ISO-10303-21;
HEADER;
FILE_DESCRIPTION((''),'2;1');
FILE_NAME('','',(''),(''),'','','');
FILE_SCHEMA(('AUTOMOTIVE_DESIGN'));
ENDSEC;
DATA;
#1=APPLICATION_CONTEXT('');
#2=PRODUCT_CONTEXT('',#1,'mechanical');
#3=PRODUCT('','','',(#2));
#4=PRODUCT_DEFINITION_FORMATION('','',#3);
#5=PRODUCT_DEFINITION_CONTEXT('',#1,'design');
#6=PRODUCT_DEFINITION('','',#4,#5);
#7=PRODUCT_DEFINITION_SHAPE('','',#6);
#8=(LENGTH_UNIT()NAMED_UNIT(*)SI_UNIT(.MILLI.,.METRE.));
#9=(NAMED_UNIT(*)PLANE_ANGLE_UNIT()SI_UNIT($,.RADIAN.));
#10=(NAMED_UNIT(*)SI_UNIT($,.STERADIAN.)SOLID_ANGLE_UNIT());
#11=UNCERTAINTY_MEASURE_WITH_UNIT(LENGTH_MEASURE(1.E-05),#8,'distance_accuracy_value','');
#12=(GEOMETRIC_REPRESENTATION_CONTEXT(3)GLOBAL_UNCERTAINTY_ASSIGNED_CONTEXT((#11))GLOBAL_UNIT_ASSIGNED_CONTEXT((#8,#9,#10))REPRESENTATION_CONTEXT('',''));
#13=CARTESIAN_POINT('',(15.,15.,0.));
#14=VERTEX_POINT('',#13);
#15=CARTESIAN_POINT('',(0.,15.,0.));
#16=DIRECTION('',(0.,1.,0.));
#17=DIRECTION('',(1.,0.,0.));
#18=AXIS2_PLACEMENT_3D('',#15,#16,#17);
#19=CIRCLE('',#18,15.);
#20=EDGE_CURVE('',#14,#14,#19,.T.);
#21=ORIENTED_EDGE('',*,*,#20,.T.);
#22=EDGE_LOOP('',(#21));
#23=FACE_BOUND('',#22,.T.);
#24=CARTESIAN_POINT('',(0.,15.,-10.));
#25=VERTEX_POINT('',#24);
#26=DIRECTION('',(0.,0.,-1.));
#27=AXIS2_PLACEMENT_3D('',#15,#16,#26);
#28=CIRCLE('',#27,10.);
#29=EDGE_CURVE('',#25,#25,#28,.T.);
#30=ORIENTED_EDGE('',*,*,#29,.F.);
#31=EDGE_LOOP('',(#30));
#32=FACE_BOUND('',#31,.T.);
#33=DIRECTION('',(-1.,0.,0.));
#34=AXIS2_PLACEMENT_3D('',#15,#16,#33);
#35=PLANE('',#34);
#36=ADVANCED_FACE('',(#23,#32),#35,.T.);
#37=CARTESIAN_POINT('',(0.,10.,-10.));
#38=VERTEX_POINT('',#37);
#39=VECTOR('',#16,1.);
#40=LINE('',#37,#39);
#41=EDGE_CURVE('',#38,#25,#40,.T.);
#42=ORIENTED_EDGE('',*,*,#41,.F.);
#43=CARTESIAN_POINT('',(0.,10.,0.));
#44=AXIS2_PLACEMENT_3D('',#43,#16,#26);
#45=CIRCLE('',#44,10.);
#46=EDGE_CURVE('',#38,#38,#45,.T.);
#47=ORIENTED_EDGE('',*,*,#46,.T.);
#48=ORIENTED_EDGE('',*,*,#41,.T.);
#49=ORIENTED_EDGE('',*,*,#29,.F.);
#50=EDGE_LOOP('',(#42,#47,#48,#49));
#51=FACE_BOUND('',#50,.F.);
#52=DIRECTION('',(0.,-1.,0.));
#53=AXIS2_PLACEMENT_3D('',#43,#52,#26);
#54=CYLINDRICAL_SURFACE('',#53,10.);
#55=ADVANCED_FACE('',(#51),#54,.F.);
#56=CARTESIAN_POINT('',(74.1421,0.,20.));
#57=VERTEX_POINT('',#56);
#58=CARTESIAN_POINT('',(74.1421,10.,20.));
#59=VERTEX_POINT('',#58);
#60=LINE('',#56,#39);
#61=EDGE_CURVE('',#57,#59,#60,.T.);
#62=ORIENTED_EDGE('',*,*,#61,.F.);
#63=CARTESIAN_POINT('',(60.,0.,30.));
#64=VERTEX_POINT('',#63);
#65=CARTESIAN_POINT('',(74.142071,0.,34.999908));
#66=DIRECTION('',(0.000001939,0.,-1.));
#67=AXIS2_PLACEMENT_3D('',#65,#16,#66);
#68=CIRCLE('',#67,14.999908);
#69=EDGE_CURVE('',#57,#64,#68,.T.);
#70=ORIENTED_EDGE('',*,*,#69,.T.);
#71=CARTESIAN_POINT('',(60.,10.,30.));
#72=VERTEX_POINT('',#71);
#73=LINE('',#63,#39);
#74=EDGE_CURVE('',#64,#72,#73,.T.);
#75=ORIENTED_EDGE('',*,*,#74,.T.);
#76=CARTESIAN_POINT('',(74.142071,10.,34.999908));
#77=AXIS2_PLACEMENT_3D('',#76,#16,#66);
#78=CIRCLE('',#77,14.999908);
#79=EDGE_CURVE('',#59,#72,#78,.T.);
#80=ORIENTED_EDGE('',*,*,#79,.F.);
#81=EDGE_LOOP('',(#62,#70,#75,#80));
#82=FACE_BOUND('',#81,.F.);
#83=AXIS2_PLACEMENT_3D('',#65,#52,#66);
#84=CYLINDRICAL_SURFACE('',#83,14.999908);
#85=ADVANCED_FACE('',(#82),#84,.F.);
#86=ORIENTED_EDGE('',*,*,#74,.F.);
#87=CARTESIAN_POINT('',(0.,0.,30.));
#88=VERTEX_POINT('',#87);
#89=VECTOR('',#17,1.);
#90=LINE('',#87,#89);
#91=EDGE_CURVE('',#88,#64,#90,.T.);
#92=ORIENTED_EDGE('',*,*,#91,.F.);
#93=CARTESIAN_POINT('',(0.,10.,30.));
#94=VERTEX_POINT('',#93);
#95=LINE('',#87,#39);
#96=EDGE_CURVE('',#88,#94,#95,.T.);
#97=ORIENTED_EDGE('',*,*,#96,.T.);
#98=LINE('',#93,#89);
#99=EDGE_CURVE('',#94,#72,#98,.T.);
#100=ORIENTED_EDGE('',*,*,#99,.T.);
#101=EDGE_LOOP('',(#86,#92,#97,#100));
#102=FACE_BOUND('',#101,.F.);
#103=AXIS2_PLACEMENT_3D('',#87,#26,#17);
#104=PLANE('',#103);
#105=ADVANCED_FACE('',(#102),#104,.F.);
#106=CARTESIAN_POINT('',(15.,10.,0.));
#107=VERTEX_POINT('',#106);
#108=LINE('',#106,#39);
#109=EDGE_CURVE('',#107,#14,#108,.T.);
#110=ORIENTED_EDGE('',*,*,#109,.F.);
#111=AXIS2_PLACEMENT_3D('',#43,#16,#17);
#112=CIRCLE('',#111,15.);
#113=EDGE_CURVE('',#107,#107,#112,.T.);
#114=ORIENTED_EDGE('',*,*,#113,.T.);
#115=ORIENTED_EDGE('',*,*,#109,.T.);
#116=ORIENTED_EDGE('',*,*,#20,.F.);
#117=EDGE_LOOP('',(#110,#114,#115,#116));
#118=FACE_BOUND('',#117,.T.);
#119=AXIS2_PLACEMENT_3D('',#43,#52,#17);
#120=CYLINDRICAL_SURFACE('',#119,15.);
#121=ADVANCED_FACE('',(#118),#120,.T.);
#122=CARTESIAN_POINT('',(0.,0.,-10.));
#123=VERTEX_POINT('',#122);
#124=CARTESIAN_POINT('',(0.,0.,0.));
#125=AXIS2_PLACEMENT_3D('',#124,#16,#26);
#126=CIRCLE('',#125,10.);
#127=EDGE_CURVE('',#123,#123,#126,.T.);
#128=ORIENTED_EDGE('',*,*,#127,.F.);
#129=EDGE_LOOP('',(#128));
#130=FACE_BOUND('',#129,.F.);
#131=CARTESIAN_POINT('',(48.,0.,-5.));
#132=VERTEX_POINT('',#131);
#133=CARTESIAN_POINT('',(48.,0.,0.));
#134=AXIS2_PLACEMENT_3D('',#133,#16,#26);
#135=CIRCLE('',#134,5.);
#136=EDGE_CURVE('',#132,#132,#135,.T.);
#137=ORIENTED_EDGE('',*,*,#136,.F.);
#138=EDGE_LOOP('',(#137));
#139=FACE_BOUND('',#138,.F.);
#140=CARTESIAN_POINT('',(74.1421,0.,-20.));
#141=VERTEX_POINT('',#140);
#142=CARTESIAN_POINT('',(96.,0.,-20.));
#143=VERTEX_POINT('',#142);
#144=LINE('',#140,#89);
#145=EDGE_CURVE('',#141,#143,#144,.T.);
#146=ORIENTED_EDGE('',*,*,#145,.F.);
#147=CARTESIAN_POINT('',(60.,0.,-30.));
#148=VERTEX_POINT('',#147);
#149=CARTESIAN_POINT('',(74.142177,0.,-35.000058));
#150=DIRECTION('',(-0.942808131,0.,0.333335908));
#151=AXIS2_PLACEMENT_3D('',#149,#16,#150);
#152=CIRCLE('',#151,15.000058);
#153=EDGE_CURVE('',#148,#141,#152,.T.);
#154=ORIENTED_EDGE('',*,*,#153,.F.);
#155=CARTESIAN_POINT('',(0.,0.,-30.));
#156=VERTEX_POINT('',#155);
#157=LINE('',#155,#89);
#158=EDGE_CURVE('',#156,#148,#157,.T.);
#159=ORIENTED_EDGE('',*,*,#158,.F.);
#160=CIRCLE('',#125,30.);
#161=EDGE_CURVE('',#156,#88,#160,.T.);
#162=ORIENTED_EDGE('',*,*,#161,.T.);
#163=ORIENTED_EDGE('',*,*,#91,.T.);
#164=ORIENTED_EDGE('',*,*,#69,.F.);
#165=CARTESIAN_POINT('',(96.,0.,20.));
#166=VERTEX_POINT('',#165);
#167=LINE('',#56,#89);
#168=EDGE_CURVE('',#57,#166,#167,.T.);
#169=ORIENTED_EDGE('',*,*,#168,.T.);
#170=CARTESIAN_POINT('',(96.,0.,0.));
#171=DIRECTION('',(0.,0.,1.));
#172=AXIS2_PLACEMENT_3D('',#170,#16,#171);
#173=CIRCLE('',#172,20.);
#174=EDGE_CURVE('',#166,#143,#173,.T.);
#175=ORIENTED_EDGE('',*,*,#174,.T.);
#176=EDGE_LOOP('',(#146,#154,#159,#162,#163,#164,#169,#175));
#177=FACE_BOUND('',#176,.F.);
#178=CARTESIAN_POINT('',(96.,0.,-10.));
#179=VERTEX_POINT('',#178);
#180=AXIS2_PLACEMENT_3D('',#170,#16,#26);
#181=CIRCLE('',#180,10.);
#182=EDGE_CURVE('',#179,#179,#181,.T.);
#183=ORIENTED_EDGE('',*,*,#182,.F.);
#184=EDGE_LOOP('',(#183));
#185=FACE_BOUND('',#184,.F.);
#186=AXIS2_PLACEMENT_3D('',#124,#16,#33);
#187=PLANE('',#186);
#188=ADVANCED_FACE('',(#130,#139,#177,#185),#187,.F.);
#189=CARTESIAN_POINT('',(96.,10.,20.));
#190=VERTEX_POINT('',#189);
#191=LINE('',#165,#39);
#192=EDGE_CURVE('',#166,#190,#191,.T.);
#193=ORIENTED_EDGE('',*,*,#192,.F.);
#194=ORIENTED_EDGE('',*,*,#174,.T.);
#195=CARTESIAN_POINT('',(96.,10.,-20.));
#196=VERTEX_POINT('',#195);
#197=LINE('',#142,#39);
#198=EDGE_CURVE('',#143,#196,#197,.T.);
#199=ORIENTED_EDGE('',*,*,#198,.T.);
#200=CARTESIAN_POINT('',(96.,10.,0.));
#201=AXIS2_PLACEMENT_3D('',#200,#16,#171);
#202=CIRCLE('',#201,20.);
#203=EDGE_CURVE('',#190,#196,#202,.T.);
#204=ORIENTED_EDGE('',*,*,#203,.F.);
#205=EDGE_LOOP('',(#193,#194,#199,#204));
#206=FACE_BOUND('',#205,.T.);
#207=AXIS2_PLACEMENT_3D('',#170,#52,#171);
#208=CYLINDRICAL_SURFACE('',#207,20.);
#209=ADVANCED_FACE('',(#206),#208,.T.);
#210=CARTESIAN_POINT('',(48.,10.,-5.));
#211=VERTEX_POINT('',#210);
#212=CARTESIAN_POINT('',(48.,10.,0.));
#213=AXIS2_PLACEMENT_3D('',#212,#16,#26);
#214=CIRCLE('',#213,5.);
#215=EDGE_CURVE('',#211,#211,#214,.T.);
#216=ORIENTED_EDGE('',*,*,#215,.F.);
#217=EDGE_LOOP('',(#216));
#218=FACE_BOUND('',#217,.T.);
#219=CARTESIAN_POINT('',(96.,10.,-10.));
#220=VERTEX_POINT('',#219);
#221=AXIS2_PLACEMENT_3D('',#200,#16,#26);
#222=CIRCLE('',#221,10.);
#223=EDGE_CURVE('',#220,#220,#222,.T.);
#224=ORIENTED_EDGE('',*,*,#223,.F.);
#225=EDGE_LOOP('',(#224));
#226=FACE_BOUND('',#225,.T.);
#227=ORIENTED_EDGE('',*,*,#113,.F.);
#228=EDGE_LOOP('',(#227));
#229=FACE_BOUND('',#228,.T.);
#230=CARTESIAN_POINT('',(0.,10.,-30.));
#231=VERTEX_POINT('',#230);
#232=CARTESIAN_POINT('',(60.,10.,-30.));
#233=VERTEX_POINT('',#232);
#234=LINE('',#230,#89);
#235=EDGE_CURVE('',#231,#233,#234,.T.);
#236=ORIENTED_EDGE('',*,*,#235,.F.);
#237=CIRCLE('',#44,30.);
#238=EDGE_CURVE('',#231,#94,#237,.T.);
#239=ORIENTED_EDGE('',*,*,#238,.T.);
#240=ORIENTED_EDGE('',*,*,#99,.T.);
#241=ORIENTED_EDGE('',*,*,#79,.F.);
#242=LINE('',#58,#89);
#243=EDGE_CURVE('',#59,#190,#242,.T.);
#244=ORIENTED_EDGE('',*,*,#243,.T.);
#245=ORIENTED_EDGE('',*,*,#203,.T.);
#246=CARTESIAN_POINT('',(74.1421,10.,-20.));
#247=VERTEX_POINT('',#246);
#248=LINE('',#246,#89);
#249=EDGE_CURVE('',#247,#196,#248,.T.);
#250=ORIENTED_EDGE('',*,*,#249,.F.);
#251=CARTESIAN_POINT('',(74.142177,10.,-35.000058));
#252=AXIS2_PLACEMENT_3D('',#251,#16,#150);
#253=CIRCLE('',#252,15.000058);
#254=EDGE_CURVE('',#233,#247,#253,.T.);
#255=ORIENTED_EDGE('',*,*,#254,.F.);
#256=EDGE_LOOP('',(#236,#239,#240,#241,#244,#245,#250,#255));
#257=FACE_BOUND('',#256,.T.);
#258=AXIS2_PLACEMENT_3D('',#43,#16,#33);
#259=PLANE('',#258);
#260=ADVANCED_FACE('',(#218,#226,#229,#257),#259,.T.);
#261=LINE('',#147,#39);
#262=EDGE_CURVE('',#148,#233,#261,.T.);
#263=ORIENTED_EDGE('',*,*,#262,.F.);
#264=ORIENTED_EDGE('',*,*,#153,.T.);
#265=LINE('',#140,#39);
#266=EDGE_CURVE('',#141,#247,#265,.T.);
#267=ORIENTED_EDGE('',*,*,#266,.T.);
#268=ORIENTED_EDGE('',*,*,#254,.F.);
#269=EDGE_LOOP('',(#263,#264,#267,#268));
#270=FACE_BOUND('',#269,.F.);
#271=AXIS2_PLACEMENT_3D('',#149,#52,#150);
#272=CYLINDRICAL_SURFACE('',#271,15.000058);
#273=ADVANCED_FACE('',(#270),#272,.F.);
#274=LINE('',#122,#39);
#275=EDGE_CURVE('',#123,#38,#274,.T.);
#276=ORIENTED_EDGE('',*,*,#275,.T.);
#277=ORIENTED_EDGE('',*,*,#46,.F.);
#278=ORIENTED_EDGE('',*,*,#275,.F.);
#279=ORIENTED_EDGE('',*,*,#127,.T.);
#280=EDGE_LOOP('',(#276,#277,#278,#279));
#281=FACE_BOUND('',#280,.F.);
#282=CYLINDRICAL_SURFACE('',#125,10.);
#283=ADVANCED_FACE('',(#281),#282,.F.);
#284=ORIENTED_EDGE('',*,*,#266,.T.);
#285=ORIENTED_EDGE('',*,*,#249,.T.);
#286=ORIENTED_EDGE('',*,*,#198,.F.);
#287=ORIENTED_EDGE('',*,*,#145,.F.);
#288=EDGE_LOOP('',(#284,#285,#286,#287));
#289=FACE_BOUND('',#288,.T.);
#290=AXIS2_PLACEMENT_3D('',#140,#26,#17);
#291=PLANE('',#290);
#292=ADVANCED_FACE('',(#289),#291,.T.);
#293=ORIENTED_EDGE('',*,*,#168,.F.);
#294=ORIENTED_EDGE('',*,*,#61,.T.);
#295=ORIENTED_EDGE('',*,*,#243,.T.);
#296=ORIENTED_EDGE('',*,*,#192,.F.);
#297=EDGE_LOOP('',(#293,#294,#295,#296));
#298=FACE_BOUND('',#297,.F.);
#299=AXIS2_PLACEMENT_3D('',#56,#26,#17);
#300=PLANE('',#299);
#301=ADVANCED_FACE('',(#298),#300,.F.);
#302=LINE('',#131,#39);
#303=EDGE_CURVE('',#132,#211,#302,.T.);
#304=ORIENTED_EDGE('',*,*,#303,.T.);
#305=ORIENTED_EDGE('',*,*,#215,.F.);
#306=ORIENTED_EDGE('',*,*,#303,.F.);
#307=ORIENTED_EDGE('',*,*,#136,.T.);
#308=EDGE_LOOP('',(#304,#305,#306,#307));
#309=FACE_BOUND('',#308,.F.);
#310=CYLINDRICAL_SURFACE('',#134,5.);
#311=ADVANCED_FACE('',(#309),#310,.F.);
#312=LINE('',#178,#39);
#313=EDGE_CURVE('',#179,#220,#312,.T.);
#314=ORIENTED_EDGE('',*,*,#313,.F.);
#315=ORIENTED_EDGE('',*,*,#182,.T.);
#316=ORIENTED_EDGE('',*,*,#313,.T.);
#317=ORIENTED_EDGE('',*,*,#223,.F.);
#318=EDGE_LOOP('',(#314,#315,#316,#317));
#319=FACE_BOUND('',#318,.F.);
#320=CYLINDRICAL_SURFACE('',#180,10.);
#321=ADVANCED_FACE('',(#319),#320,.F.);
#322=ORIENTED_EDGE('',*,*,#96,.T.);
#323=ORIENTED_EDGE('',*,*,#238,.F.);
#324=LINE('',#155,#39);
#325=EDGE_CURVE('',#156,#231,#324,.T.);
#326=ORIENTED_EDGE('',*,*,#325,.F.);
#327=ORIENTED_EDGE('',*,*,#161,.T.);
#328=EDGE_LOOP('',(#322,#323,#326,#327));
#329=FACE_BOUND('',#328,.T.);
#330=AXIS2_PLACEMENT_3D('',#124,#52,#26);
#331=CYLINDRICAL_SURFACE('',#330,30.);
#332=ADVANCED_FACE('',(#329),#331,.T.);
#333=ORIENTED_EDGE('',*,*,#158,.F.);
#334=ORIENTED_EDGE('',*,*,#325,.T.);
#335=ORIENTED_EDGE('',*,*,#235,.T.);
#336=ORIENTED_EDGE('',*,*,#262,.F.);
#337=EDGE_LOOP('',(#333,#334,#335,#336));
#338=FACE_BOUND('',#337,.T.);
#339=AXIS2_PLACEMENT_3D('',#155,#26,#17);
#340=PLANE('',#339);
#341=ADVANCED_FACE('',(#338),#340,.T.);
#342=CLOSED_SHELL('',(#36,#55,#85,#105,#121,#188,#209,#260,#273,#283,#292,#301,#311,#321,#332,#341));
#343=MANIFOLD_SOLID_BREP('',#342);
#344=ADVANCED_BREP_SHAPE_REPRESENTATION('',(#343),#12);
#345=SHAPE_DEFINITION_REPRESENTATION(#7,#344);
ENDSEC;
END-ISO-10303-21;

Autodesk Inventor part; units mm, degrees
ref_plane "YZ Plane" through (0, 0, 0) normal (1, 0, 0) x (0, 1, 0)
ref_plane "XZ Plane" through (0, 0, 0) normal (0, 1, 0) x (-1, 0, 0)
ref_plane "XY Plane" through (0, 0, 0) normal (0, 0, 1) x (1, 0, 0)
sketch "Sketch1" plane through (0, 0, 0) normal (0, 1, 0) x (-1, 0, 0)
  arc A0 (0, -30) -> (0, 30) centre (0, 0) ccw
  line L0 (0, -30) -> (-60, -30)
  arc A1 (-60, -30) -> (-74.1421, -20) centre (-74.1421, -35) ccw
  line L1 (-74.1421, -20) -> (-96, -20)
  line L2 (0, 0) -> (-48, 0)
  line L3 (-48, 0) -> (-96, 0)
  line L4 (0, 30) -> (-60, 30)
  arc A2 (-74.1421, 20) -> (-60, 30) centre (-74.1421, 35) ccw
  line L5 (-74.1421, 20) -> (-96, 20)
  arc A3 (-96, 20) -> (-96, -20) centre (-96, 0) ccw
  dimension "d1" = 30
  dimension "d2" = 48
  dimension "d3" = 60
  dimension "d4" = 15
  dimension "d5" = 20
  dimension "d6" = 96
extrude "Extrusion1" add sketch "Sketch1" along normal blind 10
hole "Hole2" at (0, 0, 0) at (96, 0, 0) direction (0, 1, 0) diameter 20 end through all
hole "Hole3" at (48, 0, 0) at (0, 0, 0) direction (0, 1, 0) diameter 10 end through all
sketch "Sketch3" plane through (0, 10, 0) normal (0, 1, 0) x (1, 0, 0)
  circle A0 centre (0, 0) radius 15
  dimension "d30" = 30
emboss "Emboss1" sketch "Sketch3" operation add depth 5 direction (0, -1, 0)
properties part number "SwivelBase"
